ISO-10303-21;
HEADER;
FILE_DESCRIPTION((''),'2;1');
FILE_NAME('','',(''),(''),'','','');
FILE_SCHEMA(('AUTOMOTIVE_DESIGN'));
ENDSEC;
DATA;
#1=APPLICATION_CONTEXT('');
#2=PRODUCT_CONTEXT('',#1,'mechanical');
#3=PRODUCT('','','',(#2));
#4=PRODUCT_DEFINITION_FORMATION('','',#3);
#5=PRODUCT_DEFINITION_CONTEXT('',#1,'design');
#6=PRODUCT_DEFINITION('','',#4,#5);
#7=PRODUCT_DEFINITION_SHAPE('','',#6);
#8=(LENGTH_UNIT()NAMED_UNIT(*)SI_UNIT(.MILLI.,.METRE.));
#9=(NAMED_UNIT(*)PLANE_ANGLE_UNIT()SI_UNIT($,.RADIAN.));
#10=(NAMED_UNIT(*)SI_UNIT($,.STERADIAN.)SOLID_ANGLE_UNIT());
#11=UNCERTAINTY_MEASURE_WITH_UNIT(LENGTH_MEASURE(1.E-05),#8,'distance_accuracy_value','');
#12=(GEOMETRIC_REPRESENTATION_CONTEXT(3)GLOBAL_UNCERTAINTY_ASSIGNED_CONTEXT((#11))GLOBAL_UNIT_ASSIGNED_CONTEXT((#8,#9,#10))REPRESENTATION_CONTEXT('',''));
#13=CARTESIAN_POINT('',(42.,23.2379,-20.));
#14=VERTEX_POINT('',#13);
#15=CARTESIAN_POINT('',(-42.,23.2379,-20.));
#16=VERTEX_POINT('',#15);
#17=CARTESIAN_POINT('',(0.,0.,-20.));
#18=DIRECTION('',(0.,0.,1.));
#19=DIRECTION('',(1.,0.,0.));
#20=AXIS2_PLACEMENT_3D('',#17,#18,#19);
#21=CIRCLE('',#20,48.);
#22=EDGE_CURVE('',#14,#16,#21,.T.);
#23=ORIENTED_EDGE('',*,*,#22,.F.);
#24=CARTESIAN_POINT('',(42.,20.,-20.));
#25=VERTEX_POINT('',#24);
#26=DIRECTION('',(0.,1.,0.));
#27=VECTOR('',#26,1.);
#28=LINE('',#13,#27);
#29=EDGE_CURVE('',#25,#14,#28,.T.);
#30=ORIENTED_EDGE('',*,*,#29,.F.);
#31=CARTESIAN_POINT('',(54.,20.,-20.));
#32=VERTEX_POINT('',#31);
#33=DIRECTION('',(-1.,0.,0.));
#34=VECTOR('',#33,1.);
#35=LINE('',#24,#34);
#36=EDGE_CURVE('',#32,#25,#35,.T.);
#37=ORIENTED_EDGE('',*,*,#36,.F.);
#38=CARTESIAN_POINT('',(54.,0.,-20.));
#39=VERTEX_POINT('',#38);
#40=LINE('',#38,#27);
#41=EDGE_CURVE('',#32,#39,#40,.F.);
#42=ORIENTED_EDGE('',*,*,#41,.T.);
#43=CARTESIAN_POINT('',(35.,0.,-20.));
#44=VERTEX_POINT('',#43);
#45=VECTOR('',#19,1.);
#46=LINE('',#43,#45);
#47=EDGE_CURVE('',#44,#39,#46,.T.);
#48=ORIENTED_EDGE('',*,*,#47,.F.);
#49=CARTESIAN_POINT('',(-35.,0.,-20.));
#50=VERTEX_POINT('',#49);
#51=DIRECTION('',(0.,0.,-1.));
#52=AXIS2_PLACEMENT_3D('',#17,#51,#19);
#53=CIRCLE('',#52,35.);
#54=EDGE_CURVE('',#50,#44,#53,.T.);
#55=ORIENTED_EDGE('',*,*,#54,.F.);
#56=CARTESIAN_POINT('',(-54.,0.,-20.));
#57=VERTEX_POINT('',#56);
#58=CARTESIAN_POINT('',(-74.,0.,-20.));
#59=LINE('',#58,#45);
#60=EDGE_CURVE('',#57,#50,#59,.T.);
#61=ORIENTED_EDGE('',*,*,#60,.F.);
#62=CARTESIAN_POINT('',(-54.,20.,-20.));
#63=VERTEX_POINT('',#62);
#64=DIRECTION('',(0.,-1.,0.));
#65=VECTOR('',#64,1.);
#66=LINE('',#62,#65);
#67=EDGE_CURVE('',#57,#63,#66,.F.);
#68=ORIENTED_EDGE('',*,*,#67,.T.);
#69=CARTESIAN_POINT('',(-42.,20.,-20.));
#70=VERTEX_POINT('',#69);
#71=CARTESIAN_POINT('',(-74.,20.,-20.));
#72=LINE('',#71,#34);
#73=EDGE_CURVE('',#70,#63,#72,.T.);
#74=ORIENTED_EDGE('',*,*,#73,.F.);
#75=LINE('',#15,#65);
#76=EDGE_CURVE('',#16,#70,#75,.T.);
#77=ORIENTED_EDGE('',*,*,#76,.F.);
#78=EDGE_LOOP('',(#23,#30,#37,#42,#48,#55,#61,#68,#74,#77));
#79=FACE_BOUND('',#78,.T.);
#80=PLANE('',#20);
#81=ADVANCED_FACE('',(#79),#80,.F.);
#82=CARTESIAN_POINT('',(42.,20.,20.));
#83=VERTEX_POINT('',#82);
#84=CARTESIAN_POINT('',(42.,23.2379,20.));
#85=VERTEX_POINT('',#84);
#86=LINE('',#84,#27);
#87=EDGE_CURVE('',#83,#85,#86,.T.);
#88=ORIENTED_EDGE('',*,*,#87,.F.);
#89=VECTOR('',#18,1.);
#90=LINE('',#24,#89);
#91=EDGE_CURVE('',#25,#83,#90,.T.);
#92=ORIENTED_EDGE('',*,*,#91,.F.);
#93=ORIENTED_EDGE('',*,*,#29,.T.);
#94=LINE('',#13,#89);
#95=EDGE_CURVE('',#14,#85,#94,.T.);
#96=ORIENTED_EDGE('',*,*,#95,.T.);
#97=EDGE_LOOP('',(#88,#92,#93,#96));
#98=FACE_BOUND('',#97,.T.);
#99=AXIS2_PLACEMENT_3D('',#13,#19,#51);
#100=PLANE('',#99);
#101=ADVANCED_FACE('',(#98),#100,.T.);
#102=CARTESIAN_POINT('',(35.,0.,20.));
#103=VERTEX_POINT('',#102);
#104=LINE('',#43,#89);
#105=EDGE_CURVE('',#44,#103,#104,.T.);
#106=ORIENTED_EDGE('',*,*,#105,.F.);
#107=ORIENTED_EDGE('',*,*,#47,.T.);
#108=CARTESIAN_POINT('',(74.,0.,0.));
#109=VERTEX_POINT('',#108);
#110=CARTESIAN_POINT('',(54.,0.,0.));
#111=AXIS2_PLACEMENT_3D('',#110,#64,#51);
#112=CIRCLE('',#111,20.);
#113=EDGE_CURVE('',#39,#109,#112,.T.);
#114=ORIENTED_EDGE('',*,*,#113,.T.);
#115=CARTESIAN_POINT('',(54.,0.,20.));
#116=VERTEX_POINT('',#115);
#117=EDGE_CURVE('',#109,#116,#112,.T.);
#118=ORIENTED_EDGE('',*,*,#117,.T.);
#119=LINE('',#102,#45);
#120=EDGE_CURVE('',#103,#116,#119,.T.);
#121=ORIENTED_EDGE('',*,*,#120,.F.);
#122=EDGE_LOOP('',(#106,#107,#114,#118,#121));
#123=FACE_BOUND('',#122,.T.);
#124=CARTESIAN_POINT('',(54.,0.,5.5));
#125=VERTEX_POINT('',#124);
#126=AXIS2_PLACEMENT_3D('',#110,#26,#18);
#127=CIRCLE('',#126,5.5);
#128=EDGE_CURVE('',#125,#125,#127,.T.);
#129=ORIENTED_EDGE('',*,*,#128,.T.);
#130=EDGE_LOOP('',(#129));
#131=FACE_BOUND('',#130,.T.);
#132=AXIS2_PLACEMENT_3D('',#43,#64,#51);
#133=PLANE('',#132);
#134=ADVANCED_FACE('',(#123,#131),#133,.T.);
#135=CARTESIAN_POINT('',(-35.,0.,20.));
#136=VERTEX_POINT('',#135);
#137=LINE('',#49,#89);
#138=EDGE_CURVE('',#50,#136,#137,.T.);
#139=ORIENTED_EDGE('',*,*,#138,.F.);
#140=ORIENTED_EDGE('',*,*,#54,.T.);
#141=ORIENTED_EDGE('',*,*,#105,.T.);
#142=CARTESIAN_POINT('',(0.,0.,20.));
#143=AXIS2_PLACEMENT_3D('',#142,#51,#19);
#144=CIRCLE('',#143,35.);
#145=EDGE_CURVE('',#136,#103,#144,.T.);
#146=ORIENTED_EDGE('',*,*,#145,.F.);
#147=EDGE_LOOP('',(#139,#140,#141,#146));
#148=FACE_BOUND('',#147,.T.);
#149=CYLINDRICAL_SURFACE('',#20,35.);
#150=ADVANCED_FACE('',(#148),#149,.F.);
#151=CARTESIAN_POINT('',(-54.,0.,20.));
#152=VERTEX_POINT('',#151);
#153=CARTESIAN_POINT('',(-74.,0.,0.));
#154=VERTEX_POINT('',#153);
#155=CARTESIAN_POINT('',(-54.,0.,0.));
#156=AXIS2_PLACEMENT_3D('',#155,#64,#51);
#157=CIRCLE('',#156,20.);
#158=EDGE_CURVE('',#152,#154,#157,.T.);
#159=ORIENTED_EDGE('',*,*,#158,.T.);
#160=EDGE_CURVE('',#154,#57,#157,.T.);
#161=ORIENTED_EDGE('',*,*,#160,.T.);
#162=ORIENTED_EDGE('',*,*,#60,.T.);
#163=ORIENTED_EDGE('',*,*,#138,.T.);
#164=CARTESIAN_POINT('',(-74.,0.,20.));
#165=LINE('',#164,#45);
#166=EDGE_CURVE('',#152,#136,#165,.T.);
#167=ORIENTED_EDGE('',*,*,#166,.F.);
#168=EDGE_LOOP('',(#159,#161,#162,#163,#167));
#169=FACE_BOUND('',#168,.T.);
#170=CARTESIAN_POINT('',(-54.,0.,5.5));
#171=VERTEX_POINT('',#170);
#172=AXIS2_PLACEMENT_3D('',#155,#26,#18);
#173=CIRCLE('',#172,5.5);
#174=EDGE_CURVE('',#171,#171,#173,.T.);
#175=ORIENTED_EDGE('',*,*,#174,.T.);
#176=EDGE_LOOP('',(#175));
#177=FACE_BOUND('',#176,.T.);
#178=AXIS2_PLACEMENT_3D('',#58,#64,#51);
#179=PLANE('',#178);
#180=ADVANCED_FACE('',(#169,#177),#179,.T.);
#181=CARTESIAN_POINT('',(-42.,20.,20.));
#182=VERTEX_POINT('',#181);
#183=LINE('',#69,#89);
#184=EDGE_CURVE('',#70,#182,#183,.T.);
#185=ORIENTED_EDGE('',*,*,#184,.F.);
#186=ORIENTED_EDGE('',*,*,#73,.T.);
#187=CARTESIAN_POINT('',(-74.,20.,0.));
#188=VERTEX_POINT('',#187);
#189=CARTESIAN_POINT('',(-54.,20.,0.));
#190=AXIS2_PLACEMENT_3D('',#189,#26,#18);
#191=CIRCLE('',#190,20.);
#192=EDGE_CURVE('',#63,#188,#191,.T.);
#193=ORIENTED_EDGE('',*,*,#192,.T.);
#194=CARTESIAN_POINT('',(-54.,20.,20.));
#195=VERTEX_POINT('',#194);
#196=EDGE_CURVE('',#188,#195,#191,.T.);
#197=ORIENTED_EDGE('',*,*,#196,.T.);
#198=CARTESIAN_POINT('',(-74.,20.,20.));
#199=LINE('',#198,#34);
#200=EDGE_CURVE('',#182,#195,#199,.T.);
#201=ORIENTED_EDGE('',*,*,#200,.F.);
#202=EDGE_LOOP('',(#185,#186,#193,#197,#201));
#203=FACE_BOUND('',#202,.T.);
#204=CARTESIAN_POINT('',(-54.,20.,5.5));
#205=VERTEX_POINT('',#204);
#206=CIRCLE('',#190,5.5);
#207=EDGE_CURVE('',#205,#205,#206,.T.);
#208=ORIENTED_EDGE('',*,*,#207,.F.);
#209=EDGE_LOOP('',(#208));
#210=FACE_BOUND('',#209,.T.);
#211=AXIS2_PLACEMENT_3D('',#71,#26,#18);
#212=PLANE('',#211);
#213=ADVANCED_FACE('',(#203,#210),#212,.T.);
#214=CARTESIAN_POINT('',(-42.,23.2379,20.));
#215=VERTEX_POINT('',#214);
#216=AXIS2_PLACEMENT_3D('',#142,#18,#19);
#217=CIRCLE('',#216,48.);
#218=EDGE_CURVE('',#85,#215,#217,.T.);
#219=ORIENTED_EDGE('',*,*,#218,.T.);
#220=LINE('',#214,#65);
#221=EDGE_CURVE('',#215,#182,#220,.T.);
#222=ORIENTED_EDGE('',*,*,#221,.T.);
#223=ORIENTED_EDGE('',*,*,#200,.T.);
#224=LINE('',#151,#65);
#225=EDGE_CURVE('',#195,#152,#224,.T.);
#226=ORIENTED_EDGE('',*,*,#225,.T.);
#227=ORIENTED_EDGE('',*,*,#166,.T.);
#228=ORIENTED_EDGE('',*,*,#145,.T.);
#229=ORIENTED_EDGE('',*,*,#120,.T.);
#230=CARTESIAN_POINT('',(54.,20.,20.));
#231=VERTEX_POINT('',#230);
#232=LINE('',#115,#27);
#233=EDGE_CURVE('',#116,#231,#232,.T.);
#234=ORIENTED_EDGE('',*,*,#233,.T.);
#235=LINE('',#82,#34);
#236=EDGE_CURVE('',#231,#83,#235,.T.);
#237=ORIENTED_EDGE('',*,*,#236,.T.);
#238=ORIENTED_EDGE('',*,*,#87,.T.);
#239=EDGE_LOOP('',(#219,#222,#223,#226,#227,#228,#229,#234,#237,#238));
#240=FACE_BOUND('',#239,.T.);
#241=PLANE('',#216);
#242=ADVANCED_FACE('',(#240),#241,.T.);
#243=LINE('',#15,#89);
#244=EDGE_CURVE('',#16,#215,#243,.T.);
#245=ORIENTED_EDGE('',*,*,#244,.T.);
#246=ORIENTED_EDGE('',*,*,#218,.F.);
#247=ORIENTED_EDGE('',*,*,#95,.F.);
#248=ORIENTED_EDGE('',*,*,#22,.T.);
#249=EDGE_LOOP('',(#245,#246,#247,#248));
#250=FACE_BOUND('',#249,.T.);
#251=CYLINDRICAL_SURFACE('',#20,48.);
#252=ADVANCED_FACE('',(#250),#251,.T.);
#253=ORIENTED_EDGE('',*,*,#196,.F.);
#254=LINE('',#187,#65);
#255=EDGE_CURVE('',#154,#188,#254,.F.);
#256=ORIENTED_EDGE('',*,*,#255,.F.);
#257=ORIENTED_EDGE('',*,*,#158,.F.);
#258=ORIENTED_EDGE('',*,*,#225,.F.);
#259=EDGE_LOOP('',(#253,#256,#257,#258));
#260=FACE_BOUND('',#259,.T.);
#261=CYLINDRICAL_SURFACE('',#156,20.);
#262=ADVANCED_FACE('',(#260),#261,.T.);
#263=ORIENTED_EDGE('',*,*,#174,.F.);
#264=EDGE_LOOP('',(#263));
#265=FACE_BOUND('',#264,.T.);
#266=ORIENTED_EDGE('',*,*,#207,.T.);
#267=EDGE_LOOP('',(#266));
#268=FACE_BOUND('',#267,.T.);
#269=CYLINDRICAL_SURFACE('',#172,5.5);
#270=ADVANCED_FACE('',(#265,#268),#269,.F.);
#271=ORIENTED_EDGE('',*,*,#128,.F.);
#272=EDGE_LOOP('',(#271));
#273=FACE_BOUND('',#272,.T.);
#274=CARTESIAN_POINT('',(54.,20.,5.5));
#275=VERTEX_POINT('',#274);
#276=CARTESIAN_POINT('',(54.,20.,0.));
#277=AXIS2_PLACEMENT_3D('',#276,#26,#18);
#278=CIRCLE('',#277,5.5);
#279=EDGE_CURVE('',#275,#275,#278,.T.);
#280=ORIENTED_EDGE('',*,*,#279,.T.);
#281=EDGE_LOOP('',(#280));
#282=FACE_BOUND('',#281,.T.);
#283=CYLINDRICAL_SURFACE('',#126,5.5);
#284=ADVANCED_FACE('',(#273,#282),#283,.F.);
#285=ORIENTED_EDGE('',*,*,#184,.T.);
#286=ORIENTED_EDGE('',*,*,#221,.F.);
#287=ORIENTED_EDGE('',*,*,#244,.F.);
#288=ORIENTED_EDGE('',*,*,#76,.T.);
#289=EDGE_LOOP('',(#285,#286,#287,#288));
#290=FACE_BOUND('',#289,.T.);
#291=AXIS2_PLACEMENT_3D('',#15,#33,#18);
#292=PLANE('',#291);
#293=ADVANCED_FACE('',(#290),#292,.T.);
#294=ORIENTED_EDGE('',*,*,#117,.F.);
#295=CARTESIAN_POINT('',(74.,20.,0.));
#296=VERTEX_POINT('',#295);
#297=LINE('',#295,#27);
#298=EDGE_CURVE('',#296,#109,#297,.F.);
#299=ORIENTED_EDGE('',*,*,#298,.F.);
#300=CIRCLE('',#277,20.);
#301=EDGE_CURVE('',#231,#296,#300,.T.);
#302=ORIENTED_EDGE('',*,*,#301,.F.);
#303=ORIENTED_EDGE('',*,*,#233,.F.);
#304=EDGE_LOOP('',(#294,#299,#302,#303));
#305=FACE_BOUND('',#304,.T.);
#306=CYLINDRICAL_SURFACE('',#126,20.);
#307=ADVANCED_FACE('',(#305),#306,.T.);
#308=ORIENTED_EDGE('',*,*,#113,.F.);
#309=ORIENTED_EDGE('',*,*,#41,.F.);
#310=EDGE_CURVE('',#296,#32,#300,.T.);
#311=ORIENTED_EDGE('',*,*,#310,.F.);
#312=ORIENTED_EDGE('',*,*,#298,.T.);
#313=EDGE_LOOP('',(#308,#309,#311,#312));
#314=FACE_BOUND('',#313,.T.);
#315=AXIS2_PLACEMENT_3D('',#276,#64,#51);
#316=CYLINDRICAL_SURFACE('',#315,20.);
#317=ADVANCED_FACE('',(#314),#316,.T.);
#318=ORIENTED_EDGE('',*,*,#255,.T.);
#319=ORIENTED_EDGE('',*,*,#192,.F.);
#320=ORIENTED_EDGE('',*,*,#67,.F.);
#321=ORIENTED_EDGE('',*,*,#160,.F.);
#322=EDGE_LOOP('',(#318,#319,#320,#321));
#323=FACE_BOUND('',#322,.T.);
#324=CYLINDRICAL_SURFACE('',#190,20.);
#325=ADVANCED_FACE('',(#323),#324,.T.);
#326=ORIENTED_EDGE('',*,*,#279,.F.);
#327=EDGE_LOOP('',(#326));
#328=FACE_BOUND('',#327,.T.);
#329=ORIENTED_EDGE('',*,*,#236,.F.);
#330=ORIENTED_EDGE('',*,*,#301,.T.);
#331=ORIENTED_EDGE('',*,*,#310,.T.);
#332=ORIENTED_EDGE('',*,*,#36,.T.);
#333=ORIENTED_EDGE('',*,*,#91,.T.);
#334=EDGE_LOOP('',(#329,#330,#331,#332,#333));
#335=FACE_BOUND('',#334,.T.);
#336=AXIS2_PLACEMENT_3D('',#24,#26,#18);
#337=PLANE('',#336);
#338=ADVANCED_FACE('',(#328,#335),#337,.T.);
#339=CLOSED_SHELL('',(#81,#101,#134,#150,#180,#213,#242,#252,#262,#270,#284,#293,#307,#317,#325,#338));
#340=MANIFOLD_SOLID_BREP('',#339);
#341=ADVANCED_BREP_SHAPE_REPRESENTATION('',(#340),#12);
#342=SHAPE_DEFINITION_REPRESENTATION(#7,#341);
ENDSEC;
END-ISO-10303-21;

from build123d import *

# Parameters (mm, degrees)
BOSS_EXTRUDE1_DEPTH      = 20
BOSS_EXTRUDE1_DEPTH_BACK = 20
SKETCH7_R                = 5.5
CUT_EXTRUDE5_DEPTH       = 20
FILLET8_R                = 20


with BuildPart() as part:
    # Sketch1 → Boss-Extrude1 (new, two sides: drawn at the far end of the back side and taken through both)
    with BuildSketch(Plane.XY.offset(-BOSS_EXTRUDE1_DEPTH_BACK)):
        with BuildLine():
            Line((35, 0), (74, 0))
            Line((74, 0), (74, 20))
            Line((74, 20), (42, 20))
            Line((42, 20), (42, 23.237900077))
            ThreePointArc((42, 23.237900077), (0, 48), (-42, 23.237900077))
            Line((-42, 23.237900077), (-42, 20))
            Line((-42, 20), (-74, 20))
            Line((-74, 20), (-74, 0))
            Line((-74, 0), (-35, 0))
            ThreePointArc((-35, 0), (0, 35), (35, 0))
        make_face()
    extrude(amount=BOSS_EXTRUDE1_DEPTH + BOSS_EXTRUDE1_DEPTH_BACK)

    # Sketch7 → Cut-Extrude5 (cut)
    with BuildSketch(Plane(origin=(0, 20, 0), x_dir=(1, 0, 0), z_dir=(0, 1, 0))):
        with Locations(Location((54, 0, 0), (0, 0, 270))):
            Circle(SKETCH7_R)
        with Locations(Location((-54, 0, 0), (0, 0, 270))):
            Circle(SKETCH7_R)
    extrude(amount=-CUT_EXTRUDE5_DEPTH, mode=Mode.SUBTRACT)

    # Fillet8
    fillet8_edges = [part.edges().sort_by_distance(p)[0] for p in [
        (-74, 10, -20),
        (-74, 10, 20),
        (74, 10, -20),
        (74, 10, 20),
    ]]
    fillet(fillet8_edges, radius=FILLET8_R - 0.0001)  # a hair under: the kernel refuses the full size


solid = part.part
